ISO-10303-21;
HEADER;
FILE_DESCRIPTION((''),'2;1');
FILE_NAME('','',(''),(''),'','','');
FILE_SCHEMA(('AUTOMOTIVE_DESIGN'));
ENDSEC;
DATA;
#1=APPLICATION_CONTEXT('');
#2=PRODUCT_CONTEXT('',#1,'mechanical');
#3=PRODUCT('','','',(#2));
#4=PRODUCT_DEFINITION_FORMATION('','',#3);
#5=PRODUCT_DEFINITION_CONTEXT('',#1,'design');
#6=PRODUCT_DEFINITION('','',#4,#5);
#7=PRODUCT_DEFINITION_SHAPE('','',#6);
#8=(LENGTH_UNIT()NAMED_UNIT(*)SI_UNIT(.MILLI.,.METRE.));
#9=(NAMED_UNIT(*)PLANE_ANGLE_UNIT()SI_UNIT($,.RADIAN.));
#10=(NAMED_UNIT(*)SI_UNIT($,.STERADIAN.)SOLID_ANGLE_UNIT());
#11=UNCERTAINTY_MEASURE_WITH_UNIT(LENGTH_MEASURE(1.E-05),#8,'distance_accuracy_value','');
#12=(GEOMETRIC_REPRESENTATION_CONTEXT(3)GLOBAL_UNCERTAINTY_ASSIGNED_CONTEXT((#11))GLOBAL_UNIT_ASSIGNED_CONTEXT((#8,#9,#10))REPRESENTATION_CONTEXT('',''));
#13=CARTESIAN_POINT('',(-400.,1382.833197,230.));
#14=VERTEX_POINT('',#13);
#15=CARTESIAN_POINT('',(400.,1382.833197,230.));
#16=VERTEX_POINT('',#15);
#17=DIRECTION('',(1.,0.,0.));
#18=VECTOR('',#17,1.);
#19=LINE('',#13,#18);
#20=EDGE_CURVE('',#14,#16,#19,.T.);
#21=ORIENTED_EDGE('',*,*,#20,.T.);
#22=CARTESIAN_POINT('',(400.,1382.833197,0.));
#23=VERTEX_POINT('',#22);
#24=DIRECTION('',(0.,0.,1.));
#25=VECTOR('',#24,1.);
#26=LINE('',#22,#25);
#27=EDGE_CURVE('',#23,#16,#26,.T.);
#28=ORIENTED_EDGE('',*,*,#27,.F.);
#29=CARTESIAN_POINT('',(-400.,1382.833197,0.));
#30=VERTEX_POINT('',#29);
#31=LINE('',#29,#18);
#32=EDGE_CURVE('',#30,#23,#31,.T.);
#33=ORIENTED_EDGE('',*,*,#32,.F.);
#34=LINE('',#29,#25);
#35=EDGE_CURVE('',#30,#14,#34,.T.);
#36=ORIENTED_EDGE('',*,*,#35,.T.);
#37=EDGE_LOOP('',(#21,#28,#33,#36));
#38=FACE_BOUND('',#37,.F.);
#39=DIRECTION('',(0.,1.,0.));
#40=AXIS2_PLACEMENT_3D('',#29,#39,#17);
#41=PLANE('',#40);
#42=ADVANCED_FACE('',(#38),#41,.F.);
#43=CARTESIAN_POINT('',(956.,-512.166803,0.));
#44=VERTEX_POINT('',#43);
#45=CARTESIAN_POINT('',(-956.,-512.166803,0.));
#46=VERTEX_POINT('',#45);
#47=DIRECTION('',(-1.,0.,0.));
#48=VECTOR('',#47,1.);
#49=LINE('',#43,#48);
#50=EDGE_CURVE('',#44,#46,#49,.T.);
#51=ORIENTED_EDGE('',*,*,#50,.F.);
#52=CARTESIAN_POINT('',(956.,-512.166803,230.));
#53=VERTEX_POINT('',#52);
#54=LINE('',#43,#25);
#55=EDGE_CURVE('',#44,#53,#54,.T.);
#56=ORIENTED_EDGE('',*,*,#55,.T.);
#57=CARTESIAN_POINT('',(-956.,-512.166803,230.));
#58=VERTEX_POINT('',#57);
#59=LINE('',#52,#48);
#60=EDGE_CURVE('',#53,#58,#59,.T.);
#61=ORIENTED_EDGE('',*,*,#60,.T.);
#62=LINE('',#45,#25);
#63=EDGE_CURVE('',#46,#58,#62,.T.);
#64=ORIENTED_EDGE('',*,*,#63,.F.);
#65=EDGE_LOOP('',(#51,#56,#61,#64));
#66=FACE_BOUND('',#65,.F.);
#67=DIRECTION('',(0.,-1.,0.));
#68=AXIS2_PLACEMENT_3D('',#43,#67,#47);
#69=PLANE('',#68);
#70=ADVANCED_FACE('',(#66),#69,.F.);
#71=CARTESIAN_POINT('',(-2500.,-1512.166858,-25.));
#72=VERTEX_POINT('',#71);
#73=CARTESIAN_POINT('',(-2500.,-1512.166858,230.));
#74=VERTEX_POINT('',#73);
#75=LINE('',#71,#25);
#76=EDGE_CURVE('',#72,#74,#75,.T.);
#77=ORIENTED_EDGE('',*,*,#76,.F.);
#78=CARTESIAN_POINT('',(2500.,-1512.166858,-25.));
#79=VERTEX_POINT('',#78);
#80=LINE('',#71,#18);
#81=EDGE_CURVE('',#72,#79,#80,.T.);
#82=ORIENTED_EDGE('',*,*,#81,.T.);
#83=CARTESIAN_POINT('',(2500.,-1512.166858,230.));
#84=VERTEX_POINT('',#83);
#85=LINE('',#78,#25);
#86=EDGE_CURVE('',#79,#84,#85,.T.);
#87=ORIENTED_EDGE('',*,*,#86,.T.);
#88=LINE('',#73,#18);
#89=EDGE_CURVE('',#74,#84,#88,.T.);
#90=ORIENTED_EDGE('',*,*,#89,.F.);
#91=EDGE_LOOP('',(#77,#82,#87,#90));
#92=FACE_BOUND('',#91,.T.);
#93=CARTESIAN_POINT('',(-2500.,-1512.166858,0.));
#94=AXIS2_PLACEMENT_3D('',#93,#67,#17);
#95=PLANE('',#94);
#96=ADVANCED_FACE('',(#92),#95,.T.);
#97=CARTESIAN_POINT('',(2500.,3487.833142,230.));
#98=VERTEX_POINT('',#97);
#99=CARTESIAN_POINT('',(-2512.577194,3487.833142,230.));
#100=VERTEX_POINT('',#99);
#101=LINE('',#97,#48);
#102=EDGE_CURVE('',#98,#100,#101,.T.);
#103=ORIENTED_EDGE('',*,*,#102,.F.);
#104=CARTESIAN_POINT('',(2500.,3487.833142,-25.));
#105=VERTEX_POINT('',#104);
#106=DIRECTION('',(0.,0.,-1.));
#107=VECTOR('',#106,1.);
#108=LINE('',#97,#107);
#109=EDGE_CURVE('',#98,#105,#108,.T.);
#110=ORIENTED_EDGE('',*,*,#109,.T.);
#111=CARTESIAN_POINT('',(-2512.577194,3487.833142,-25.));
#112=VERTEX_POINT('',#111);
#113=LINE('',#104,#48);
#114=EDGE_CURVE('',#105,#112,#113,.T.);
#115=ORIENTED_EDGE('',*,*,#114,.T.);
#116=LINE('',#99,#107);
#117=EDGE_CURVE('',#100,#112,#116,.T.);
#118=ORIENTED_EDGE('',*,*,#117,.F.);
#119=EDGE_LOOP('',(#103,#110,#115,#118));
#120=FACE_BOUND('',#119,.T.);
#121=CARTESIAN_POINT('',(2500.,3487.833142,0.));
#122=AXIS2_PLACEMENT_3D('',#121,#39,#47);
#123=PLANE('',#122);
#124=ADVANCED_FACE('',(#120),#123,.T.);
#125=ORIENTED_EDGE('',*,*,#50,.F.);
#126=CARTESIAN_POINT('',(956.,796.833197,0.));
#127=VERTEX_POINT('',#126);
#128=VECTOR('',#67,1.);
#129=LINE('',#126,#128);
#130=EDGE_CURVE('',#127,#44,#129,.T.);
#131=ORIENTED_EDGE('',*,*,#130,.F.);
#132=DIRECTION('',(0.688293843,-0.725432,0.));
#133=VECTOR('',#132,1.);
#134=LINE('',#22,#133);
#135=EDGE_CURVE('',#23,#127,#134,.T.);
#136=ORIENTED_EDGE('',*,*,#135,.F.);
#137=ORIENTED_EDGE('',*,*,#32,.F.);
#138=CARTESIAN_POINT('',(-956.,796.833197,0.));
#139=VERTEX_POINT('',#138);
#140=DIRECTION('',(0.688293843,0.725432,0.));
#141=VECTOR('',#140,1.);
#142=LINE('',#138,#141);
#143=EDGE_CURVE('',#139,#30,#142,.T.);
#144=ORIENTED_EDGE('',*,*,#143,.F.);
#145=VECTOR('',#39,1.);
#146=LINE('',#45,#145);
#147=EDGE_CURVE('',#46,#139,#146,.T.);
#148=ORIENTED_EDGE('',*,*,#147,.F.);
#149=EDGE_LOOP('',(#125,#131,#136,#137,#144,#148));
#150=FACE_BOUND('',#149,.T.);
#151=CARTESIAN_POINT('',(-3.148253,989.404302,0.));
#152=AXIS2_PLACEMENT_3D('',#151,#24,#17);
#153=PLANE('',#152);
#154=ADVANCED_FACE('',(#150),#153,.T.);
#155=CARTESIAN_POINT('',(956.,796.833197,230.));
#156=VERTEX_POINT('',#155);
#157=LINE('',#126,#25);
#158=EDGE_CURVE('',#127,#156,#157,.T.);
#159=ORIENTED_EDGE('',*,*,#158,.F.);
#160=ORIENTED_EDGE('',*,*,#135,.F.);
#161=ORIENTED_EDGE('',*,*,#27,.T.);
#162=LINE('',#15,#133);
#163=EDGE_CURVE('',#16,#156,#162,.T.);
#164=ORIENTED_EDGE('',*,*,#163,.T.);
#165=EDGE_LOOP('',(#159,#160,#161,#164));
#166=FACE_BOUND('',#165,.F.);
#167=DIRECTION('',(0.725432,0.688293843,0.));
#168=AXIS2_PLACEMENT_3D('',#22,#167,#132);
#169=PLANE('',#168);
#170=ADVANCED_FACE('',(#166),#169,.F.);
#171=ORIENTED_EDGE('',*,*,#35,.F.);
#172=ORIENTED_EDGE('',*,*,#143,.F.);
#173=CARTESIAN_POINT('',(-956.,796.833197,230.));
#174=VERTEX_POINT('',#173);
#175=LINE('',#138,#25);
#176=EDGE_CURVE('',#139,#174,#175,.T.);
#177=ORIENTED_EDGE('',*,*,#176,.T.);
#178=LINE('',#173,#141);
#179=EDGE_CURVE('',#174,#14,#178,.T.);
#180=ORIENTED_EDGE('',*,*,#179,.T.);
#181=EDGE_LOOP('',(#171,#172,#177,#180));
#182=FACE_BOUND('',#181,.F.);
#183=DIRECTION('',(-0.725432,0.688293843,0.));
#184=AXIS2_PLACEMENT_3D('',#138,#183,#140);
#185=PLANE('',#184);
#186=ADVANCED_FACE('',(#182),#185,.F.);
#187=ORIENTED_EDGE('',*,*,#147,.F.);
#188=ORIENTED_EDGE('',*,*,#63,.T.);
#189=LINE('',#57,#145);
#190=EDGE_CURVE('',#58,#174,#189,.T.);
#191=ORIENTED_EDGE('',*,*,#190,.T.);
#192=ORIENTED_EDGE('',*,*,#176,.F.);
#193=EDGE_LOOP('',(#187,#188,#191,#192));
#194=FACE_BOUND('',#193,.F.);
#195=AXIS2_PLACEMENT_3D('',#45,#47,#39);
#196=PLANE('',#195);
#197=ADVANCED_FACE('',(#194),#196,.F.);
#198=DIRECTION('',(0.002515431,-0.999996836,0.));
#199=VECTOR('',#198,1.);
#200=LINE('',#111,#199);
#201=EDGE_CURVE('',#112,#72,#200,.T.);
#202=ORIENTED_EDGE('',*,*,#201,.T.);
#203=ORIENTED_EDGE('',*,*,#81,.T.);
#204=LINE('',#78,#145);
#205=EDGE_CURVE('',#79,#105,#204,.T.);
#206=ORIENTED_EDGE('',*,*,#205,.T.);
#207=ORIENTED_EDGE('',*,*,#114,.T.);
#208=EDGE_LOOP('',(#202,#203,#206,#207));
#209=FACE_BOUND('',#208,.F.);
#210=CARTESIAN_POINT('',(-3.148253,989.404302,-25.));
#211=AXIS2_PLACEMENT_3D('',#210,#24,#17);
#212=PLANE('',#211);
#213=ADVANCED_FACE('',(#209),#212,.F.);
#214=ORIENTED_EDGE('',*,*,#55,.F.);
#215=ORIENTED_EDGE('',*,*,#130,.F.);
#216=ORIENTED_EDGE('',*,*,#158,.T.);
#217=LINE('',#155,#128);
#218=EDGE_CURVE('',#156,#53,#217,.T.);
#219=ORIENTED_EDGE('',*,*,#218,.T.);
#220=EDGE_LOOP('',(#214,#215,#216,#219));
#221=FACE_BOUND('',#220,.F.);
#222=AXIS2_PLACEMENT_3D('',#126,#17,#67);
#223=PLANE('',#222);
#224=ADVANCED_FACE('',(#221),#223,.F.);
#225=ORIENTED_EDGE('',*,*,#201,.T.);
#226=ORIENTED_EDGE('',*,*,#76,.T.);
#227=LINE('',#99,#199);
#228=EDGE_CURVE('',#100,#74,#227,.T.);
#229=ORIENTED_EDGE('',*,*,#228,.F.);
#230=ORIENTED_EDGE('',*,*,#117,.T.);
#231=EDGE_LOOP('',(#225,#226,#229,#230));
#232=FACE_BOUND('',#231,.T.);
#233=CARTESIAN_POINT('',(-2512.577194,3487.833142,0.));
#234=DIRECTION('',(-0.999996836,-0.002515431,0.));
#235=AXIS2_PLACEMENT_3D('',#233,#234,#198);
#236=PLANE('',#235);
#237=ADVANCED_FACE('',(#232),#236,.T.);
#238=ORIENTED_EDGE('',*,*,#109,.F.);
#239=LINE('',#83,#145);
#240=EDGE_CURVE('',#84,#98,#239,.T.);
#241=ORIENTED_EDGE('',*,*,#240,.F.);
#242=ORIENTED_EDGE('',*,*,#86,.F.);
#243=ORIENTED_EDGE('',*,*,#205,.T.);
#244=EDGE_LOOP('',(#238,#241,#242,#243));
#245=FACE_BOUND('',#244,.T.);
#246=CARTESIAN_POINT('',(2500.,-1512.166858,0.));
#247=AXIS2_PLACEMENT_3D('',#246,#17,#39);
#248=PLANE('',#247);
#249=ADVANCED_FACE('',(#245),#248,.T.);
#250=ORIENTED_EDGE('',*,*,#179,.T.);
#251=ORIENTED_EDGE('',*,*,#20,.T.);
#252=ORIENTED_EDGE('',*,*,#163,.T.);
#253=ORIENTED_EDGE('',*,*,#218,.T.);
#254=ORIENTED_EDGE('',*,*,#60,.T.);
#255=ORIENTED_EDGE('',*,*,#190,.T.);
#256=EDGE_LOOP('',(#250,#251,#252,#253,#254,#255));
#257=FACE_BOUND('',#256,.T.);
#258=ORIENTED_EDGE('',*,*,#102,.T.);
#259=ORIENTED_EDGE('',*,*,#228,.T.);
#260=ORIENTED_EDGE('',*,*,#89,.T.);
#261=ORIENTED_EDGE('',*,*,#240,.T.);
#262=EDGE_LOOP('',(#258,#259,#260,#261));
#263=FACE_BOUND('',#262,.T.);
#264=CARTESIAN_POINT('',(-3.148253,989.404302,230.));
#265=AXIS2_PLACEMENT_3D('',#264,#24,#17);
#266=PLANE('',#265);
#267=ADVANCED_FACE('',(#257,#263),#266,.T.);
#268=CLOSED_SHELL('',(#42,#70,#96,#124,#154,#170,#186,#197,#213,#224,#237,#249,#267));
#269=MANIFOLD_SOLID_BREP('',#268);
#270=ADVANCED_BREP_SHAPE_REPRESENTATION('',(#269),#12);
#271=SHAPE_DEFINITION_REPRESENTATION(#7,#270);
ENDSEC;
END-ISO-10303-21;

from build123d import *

# Parameters (mm, degrees)
F1_DEPTH = 230
F2_DEPTH = 25


# Not quite as in the source:
# - a feature names something its author has since deleted; it is built from what else it names


with BuildPart() as f1:
    # F0 (on Top) → F1 (new body)
    with BuildSketch(Plane.XY):
        Polygon((-2512.5771939687, 3487.8331422806), (-2500, -1512.1668577194), (2500, -1512.1668577194), (2500, 3487.8331422806), align=None)
        Polygon((-956, 796.8331971962), (-400, 1382.8331971962), (0, 1382.8331971962), (400, 1382.8331971962), (956, 796.8331971962), (956, -512.1668028038), (-956, -512.1668028038), align=None, mode=Mode.SUBTRACT)
    extrude(amount=F1_DEPTH)

    # F0 (on Top) → F2 (join)
    with BuildSketch(Plane.XY):
        Polygon((-2512.5771939687, 3487.8331422806), (-2500, -1512.1668577194), (2500, -1512.1668577194), (2500, 3487.8331422806), align=None)
        Polygon((-956, 796.8331971962), (-400, 1382.8331971962), (0, 1382.8331971962), (400, 1382.8331971962), (956, 796.8331971962), (956, -512.1668028038), (-956, -512.1668028038), align=None, mode=Mode.SUBTRACT)
        Polygon((0, 1382.8331971962), (-400, 1382.8331971962), (-956, 796.8331971962), (-956, -512.1668028038), (956, -512.1668028038), (956, 796.8331971962), (400, 1382.8331971962), align=None)
    extrude(amount=-F2_DEPTH)


solid = f1.part
